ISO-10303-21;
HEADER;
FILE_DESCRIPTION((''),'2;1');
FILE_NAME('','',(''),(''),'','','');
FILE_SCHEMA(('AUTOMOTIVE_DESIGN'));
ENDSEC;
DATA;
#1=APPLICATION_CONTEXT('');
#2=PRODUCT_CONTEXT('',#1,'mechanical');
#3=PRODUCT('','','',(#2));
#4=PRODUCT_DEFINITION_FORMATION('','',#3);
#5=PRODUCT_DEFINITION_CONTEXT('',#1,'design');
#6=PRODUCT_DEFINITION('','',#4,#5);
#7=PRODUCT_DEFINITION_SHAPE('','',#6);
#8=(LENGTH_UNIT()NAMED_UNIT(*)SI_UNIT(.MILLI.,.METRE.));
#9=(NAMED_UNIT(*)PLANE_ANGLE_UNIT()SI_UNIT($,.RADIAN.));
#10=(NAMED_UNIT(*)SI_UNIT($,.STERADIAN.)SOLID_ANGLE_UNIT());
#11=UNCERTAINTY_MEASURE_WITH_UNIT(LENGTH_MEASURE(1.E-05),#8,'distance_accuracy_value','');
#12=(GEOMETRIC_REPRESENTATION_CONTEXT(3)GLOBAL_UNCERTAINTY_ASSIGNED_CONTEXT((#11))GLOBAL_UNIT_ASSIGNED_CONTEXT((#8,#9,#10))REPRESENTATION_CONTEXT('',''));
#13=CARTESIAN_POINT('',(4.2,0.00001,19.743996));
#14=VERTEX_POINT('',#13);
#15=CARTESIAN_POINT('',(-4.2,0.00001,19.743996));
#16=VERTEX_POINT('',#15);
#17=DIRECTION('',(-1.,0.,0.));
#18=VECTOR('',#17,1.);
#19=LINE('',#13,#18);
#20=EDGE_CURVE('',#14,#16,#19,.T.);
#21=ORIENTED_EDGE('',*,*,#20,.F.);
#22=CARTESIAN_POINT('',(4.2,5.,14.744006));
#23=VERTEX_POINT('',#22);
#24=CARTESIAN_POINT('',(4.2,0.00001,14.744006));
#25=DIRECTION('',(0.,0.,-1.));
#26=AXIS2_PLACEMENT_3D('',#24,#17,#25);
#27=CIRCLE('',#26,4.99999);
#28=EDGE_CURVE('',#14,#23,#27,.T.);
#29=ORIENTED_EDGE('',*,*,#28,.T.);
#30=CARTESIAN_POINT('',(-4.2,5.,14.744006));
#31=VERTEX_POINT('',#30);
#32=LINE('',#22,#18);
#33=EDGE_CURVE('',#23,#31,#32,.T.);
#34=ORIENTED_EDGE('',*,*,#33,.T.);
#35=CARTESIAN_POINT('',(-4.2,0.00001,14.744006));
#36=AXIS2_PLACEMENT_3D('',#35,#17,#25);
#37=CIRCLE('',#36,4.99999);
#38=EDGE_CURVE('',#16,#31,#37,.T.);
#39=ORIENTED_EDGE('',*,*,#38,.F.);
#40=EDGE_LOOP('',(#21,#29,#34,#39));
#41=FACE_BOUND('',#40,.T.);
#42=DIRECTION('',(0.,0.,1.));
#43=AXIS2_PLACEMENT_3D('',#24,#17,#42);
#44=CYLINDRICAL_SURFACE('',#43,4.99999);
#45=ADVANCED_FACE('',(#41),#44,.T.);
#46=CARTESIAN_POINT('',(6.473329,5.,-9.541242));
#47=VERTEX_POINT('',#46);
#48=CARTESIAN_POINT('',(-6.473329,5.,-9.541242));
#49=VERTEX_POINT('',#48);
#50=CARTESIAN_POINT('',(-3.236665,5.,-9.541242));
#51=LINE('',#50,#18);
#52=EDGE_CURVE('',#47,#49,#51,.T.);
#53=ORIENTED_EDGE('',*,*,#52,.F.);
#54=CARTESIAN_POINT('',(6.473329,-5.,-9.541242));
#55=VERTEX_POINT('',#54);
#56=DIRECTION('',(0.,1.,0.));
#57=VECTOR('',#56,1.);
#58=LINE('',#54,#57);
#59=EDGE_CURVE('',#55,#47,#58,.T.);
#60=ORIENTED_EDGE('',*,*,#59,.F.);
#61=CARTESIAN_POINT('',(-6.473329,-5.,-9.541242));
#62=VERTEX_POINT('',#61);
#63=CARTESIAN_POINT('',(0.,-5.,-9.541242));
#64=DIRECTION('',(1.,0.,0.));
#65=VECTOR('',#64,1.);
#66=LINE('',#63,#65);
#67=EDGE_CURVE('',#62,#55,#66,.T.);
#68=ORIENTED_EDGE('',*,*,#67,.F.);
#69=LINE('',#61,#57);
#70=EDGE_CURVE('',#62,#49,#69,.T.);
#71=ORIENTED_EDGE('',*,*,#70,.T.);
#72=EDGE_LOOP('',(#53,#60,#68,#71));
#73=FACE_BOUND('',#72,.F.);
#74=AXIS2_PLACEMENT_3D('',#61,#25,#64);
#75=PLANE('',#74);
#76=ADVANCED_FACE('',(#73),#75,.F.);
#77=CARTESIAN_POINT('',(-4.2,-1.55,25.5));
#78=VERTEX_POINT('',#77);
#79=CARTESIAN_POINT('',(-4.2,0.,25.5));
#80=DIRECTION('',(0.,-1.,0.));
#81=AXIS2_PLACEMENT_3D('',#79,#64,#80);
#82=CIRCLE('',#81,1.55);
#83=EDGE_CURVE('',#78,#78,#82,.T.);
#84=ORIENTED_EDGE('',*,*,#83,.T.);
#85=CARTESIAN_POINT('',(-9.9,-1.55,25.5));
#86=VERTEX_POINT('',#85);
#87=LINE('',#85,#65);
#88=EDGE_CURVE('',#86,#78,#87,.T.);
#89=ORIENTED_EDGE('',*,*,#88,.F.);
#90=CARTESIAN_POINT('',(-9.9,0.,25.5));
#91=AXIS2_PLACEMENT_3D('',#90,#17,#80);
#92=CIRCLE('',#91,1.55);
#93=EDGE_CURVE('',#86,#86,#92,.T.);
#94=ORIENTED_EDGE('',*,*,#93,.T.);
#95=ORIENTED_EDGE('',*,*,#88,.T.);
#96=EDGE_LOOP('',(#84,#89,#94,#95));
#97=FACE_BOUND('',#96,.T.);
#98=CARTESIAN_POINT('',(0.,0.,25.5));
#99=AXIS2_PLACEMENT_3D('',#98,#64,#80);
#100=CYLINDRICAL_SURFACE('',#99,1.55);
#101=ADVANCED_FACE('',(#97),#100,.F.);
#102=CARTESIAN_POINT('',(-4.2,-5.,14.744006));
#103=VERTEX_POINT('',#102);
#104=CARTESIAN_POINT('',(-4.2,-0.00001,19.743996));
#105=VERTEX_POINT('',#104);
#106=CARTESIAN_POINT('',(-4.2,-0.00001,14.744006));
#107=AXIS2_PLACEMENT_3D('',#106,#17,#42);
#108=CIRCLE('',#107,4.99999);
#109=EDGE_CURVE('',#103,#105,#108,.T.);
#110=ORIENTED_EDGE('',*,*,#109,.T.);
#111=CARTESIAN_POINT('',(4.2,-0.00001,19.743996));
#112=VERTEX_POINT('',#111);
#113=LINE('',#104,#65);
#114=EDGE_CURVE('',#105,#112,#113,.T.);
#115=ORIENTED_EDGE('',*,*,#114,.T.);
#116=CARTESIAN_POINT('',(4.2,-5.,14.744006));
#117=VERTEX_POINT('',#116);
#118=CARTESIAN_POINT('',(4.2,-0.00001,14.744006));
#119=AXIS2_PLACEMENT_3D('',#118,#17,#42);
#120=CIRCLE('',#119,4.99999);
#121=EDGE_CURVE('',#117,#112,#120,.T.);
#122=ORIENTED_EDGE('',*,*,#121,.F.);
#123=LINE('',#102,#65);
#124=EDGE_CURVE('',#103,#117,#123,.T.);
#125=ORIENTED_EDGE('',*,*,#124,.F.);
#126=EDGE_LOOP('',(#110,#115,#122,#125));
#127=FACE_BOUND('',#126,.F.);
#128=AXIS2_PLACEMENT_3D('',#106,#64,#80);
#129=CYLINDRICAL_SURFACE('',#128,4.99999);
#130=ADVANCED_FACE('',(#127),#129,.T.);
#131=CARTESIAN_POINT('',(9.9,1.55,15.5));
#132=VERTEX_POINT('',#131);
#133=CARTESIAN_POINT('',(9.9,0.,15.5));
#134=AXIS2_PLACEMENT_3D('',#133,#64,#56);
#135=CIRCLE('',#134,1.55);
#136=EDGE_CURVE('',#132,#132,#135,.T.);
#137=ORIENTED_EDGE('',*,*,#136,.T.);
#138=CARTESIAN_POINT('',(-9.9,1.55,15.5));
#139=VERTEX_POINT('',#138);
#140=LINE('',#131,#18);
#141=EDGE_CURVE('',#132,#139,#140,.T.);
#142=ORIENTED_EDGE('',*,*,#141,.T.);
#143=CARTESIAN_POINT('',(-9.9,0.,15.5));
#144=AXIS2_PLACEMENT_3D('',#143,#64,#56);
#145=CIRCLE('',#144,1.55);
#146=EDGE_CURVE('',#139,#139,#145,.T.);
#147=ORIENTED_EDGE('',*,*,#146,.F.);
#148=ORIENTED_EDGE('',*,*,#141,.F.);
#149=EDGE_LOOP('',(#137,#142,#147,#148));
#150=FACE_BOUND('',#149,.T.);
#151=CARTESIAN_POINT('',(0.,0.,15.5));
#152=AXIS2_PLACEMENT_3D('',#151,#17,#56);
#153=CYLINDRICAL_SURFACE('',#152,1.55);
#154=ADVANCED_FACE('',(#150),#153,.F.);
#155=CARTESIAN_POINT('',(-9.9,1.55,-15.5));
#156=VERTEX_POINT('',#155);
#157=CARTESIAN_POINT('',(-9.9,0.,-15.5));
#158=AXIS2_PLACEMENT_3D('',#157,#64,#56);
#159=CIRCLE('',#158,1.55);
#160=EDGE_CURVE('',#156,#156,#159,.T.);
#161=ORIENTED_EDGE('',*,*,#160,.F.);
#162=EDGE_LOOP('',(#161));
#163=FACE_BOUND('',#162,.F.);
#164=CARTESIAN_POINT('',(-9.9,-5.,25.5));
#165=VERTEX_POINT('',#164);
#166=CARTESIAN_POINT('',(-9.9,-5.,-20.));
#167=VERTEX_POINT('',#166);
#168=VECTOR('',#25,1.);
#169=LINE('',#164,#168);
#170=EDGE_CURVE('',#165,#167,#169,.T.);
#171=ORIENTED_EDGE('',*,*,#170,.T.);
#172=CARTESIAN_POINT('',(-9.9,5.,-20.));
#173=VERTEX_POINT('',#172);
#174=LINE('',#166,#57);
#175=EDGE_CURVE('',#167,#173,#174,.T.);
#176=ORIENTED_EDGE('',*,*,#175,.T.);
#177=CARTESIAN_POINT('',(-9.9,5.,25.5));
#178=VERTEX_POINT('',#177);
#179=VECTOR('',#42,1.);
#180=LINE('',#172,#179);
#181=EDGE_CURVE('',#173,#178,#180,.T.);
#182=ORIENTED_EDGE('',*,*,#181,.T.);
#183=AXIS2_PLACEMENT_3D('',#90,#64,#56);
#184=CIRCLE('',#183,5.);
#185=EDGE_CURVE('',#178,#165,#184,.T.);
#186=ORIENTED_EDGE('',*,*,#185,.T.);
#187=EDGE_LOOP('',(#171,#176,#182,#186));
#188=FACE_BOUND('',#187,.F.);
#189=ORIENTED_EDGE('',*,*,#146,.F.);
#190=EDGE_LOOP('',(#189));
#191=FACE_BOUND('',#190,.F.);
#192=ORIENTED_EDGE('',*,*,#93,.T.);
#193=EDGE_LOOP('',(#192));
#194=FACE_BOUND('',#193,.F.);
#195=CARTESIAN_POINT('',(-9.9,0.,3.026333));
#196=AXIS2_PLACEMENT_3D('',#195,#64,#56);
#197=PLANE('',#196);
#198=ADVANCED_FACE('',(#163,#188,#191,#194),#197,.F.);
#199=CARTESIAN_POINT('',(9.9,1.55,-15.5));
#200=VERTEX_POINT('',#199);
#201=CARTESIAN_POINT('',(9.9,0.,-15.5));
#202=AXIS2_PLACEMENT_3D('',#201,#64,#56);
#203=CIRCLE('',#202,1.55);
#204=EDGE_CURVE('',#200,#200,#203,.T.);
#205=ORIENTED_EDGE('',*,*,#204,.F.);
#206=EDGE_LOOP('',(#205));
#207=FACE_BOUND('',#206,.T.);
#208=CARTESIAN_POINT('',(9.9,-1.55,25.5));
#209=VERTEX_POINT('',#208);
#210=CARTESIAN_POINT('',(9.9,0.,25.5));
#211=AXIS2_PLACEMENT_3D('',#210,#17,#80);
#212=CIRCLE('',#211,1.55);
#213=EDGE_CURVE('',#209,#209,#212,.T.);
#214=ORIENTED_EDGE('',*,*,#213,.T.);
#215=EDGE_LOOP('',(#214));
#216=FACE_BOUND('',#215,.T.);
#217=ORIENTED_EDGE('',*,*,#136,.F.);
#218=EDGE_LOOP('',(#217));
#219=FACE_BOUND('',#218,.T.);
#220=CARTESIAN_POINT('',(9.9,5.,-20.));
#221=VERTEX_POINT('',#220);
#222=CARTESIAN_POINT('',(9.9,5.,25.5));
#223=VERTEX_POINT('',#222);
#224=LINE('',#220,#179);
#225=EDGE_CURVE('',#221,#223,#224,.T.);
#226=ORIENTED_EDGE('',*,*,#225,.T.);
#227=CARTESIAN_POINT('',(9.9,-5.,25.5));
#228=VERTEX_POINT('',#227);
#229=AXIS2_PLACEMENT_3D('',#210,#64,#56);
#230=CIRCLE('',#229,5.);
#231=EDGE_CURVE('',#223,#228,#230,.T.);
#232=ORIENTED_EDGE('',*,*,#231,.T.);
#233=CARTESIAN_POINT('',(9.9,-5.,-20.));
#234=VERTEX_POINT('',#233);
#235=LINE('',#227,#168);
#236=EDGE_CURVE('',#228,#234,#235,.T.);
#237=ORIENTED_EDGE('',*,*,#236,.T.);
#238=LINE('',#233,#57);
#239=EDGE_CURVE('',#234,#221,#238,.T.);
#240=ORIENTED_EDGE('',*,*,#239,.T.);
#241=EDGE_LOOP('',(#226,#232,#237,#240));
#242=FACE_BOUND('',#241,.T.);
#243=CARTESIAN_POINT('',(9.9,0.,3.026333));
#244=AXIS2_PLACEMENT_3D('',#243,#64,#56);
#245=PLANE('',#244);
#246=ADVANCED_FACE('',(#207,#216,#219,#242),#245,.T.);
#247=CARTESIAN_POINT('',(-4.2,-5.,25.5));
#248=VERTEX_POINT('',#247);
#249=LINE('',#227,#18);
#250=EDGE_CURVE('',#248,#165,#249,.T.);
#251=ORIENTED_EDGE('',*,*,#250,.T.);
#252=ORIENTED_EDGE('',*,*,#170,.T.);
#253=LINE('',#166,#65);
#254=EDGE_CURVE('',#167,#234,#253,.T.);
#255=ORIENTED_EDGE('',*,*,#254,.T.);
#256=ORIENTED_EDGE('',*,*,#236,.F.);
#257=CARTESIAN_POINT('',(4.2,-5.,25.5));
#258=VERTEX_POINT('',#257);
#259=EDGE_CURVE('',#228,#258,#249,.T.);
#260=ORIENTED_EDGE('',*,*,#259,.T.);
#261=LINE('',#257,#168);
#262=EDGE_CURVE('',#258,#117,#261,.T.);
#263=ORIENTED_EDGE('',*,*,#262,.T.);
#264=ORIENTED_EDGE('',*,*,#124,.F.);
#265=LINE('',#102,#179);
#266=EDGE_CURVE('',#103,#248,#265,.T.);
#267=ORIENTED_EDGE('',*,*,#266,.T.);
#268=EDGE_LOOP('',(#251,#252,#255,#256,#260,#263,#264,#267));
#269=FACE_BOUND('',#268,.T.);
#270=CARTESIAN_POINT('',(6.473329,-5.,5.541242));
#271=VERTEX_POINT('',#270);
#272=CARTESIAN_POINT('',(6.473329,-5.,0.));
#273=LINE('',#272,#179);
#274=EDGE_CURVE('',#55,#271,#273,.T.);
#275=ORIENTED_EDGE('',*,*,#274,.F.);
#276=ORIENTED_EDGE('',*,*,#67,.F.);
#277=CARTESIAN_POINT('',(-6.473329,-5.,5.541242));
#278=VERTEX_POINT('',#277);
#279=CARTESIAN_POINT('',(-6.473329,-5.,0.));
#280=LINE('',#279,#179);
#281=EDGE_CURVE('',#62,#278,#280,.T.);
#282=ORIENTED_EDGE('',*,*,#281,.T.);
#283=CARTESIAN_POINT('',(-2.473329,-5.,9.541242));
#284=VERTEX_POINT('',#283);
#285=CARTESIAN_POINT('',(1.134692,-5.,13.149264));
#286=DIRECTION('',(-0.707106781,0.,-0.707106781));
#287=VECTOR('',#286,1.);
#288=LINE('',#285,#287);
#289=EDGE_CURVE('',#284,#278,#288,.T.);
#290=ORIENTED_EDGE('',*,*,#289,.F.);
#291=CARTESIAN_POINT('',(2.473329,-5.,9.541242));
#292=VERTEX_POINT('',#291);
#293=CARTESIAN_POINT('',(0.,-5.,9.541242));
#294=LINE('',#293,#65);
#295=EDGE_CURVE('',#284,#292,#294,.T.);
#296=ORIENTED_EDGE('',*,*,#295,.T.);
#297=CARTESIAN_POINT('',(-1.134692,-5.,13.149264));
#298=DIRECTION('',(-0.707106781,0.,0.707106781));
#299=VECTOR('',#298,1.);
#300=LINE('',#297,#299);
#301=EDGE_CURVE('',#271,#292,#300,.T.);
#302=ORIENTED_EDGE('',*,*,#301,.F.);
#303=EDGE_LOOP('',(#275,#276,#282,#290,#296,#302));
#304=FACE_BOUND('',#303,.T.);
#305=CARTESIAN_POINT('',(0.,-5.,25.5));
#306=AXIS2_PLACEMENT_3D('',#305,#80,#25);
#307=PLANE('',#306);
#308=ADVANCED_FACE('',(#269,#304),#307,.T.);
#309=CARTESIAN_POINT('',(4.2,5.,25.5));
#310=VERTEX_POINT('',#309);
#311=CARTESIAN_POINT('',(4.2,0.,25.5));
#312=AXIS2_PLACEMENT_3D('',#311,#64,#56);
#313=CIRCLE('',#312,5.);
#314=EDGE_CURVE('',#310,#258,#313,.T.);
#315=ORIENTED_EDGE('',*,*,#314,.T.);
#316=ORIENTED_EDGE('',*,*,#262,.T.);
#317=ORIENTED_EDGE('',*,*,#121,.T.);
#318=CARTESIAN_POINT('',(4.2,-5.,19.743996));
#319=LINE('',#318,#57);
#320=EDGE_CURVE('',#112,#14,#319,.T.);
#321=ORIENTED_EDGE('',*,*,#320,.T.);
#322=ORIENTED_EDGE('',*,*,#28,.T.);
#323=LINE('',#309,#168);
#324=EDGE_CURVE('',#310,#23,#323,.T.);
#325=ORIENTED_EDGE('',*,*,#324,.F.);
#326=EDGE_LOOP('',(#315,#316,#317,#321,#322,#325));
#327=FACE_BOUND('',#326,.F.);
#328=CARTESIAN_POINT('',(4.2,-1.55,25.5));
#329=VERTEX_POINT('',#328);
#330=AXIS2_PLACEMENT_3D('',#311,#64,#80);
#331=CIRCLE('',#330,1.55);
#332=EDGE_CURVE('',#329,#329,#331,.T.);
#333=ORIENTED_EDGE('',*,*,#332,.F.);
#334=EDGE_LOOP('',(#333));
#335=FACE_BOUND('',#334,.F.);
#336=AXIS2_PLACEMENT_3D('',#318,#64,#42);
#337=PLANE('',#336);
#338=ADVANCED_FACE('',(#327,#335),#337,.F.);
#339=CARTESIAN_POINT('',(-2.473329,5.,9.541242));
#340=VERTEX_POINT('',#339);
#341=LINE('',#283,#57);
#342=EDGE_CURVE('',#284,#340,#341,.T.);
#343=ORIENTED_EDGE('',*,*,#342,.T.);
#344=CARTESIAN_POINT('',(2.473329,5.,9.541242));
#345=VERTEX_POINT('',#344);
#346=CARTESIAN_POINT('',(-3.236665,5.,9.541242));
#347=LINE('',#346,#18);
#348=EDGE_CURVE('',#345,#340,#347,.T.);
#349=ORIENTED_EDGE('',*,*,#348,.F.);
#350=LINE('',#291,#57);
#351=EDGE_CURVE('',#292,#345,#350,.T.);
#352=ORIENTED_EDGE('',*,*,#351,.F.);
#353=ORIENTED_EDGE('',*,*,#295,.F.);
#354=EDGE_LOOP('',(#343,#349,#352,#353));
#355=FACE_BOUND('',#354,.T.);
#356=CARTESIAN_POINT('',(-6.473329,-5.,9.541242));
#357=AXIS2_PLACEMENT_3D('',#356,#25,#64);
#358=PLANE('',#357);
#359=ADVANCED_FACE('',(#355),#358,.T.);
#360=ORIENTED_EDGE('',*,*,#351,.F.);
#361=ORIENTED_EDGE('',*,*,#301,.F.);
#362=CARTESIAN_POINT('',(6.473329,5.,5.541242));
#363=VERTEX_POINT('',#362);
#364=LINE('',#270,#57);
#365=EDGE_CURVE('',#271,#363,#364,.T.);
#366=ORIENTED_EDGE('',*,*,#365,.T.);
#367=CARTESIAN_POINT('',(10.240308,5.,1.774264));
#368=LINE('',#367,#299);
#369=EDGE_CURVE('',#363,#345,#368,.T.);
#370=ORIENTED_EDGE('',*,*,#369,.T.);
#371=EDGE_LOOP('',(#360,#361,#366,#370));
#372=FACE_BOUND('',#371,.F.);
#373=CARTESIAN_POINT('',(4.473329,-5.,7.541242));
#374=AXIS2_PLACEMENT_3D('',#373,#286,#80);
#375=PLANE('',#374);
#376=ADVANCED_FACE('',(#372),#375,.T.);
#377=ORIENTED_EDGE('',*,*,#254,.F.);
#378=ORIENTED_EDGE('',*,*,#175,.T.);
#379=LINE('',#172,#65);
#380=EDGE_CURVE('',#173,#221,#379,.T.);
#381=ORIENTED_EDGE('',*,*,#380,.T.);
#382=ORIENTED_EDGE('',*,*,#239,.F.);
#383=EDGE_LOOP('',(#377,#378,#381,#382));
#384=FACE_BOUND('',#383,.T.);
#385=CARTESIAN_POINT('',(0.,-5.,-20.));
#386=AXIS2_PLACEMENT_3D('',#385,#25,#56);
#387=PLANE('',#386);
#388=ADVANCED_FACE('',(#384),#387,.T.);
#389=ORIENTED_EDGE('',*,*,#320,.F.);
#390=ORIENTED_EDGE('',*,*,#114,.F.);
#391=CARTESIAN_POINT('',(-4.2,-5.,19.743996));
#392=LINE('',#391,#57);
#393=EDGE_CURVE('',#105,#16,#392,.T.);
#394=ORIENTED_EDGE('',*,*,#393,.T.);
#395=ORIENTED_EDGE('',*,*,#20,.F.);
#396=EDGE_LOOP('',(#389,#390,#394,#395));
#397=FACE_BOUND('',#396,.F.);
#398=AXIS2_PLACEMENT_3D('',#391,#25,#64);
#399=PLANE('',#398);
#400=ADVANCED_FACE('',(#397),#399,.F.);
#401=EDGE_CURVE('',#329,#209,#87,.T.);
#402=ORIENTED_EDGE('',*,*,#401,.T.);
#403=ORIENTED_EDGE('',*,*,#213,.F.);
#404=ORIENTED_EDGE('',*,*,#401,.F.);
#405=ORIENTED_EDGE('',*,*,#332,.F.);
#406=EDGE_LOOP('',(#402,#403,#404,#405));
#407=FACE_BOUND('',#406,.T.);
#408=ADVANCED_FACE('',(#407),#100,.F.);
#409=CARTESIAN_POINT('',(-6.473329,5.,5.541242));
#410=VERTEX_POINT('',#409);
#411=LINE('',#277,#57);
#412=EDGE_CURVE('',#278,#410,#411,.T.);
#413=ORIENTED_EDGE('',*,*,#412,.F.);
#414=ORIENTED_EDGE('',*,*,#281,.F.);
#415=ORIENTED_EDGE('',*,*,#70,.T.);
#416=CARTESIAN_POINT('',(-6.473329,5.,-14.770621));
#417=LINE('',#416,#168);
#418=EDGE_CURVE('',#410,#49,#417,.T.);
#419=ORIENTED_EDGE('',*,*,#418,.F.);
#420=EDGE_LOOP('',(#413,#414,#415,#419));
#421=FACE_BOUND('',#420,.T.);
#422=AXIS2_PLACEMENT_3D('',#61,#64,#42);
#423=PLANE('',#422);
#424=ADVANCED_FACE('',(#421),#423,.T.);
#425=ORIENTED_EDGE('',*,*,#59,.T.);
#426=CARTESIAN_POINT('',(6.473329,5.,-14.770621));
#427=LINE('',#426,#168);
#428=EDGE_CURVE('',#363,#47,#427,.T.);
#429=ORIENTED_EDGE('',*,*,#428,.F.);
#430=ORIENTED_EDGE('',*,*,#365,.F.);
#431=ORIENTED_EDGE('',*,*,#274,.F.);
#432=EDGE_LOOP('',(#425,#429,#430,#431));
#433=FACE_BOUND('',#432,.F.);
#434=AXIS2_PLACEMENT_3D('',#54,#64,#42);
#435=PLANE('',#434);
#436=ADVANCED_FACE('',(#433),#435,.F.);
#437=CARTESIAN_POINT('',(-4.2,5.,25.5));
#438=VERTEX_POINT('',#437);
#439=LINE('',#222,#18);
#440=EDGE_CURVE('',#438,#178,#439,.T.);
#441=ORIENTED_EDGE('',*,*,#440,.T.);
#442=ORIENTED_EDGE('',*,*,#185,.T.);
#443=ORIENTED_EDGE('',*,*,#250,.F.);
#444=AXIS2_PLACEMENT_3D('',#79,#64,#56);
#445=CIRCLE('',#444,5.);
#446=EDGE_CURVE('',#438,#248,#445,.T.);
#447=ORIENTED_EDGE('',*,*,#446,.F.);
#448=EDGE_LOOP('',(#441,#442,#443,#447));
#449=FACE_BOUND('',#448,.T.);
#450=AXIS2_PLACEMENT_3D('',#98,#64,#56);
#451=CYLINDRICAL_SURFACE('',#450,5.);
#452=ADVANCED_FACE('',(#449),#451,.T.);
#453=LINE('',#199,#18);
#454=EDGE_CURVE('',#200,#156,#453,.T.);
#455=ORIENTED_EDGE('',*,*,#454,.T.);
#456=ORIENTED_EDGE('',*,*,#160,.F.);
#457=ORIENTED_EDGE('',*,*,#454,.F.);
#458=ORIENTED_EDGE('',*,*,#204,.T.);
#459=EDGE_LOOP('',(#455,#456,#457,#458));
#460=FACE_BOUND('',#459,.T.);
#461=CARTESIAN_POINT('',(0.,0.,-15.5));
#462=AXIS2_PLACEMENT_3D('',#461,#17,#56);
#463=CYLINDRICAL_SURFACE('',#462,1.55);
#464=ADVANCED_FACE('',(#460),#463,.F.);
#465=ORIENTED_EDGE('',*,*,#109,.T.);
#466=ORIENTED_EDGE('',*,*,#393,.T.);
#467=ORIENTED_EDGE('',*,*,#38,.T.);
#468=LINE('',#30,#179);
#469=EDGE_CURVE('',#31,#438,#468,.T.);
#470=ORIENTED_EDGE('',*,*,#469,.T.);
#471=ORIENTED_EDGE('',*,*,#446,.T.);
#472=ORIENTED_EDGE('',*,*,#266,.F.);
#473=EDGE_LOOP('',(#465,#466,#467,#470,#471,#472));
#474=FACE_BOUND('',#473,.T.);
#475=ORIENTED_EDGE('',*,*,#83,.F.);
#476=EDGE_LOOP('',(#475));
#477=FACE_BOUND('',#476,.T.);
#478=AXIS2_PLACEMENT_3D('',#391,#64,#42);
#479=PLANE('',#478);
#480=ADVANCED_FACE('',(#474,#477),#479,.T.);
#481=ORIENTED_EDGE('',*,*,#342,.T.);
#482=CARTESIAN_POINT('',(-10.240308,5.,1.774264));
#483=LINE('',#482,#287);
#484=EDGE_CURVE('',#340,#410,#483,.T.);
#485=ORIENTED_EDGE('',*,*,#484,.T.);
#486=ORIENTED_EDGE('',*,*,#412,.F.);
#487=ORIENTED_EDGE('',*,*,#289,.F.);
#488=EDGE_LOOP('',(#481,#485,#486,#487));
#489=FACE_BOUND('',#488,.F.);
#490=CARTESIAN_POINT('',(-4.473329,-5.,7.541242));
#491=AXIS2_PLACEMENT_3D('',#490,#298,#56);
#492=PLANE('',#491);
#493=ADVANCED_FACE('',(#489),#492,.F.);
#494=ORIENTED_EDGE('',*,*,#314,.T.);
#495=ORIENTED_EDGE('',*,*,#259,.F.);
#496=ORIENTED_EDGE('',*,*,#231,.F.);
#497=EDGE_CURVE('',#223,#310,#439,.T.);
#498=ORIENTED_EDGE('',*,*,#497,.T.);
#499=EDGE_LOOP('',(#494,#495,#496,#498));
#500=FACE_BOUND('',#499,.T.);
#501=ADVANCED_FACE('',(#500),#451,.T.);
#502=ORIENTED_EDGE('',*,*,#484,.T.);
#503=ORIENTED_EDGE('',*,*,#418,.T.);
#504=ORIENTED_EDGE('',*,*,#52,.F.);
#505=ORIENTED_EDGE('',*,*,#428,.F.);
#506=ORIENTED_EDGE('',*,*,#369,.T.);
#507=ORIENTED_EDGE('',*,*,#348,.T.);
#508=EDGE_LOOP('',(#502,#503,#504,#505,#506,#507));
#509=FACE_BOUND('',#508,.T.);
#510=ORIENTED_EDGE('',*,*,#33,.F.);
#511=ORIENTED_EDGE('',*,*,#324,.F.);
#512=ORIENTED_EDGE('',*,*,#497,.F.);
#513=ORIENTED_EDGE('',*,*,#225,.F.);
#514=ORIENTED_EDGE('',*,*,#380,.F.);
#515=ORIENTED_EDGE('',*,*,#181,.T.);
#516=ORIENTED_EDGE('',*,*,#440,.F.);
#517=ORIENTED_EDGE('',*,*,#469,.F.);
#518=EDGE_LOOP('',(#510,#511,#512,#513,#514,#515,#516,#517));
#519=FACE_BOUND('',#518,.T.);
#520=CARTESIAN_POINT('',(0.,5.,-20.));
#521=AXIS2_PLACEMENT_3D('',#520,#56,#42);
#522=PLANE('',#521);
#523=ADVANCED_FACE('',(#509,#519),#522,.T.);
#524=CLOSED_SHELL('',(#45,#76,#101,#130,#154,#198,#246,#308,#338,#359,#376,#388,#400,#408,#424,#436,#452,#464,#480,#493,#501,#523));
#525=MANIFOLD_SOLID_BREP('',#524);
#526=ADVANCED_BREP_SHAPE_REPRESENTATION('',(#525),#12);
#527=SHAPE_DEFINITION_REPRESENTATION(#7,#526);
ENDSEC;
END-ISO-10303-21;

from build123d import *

# Parameters (mm, degrees)
F0_R     = 1.55
F1_DEPTH = 9.9
F2_W     = 8.4
F2_H     = 11.5120084733
F2_W_2   = 12.9466587678
F2_H_2   = 19.0824847668
F3_DEPTH = 25
F4_R     = 4.99999
F5_SIZE  = 4


# Not quite as in the source:
# - a fillet or chamfer is up to 0.001 mm smaller than in the source, because OpenCascade refuses the exact size
# - a feature names something its author has since deleted; it is built from what else it names


with BuildPart() as f1:
    # F0 (on Right) → F1 (new body, symmetric)
    with BuildSketch(Plane.YZ):
        with BuildLine():
            Line((-5, 25.5), (-5, -20))
            Line((-5, -20), (5, -20))
            Line((5, -20), (5, 25.5))
            Line((5, 25.5), (1.55, 25.5))
            ThreePointArc((1.55, 25.5), (0, 23.95), (-1.55, 25.5))
            Line((-1.55, 25.5), (-5, 25.5))
        make_face()
        with Locations((0, -15.5)):
            Circle(F0_R, mode=Mode.SUBTRACT)
        with Locations((0, 15.5)):
            Circle(F0_R, mode=Mode.SUBTRACT)
        with BuildLine():
            ThreePointArc((5, 25.5), (0, 30.5), (-5, 25.5))
            Line((-5, 25.5), (-1.55, 25.5))
            ThreePointArc((-1.55, 25.5), (0, 27.05), (1.55, 25.5))
            Line((1.55, 25.5), (5, 25.5))
        make_face()
    extrude(amount=F1_DEPTH, both=True)

    # F2 (on face) → F3 (cut)
    with BuildSketch(Plane.XZ.offset(5)):
        with Locations((0, 25.5)):
            Rectangle(F2_W, F2_H)
        Rectangle(F2_W_2, F2_H_2)
    extrude(amount=-F3_DEPTH, mode=Mode.SUBTRACT)

    # F4 (radius 5 in the source; OpenCascade refuses exactly that, so slightly less here)
    f4_edges = [f1.edges().sort_by_distance(p)[0] for p in [
        (0, -5, 19.743996),
        (0, 5, 19.743996),
    ]]
    fillet(f4_edges, radius=F4_R)

    # F5
    f5_edges = [f1.edges().sort_by_distance(p)[0] for p in [
        (6.473329, 0, 9.541242),
        (-6.473329, 0, 9.541242),
    ]]
    chamfer(f5_edges, length=F5_SIZE)


solid = f1.part
